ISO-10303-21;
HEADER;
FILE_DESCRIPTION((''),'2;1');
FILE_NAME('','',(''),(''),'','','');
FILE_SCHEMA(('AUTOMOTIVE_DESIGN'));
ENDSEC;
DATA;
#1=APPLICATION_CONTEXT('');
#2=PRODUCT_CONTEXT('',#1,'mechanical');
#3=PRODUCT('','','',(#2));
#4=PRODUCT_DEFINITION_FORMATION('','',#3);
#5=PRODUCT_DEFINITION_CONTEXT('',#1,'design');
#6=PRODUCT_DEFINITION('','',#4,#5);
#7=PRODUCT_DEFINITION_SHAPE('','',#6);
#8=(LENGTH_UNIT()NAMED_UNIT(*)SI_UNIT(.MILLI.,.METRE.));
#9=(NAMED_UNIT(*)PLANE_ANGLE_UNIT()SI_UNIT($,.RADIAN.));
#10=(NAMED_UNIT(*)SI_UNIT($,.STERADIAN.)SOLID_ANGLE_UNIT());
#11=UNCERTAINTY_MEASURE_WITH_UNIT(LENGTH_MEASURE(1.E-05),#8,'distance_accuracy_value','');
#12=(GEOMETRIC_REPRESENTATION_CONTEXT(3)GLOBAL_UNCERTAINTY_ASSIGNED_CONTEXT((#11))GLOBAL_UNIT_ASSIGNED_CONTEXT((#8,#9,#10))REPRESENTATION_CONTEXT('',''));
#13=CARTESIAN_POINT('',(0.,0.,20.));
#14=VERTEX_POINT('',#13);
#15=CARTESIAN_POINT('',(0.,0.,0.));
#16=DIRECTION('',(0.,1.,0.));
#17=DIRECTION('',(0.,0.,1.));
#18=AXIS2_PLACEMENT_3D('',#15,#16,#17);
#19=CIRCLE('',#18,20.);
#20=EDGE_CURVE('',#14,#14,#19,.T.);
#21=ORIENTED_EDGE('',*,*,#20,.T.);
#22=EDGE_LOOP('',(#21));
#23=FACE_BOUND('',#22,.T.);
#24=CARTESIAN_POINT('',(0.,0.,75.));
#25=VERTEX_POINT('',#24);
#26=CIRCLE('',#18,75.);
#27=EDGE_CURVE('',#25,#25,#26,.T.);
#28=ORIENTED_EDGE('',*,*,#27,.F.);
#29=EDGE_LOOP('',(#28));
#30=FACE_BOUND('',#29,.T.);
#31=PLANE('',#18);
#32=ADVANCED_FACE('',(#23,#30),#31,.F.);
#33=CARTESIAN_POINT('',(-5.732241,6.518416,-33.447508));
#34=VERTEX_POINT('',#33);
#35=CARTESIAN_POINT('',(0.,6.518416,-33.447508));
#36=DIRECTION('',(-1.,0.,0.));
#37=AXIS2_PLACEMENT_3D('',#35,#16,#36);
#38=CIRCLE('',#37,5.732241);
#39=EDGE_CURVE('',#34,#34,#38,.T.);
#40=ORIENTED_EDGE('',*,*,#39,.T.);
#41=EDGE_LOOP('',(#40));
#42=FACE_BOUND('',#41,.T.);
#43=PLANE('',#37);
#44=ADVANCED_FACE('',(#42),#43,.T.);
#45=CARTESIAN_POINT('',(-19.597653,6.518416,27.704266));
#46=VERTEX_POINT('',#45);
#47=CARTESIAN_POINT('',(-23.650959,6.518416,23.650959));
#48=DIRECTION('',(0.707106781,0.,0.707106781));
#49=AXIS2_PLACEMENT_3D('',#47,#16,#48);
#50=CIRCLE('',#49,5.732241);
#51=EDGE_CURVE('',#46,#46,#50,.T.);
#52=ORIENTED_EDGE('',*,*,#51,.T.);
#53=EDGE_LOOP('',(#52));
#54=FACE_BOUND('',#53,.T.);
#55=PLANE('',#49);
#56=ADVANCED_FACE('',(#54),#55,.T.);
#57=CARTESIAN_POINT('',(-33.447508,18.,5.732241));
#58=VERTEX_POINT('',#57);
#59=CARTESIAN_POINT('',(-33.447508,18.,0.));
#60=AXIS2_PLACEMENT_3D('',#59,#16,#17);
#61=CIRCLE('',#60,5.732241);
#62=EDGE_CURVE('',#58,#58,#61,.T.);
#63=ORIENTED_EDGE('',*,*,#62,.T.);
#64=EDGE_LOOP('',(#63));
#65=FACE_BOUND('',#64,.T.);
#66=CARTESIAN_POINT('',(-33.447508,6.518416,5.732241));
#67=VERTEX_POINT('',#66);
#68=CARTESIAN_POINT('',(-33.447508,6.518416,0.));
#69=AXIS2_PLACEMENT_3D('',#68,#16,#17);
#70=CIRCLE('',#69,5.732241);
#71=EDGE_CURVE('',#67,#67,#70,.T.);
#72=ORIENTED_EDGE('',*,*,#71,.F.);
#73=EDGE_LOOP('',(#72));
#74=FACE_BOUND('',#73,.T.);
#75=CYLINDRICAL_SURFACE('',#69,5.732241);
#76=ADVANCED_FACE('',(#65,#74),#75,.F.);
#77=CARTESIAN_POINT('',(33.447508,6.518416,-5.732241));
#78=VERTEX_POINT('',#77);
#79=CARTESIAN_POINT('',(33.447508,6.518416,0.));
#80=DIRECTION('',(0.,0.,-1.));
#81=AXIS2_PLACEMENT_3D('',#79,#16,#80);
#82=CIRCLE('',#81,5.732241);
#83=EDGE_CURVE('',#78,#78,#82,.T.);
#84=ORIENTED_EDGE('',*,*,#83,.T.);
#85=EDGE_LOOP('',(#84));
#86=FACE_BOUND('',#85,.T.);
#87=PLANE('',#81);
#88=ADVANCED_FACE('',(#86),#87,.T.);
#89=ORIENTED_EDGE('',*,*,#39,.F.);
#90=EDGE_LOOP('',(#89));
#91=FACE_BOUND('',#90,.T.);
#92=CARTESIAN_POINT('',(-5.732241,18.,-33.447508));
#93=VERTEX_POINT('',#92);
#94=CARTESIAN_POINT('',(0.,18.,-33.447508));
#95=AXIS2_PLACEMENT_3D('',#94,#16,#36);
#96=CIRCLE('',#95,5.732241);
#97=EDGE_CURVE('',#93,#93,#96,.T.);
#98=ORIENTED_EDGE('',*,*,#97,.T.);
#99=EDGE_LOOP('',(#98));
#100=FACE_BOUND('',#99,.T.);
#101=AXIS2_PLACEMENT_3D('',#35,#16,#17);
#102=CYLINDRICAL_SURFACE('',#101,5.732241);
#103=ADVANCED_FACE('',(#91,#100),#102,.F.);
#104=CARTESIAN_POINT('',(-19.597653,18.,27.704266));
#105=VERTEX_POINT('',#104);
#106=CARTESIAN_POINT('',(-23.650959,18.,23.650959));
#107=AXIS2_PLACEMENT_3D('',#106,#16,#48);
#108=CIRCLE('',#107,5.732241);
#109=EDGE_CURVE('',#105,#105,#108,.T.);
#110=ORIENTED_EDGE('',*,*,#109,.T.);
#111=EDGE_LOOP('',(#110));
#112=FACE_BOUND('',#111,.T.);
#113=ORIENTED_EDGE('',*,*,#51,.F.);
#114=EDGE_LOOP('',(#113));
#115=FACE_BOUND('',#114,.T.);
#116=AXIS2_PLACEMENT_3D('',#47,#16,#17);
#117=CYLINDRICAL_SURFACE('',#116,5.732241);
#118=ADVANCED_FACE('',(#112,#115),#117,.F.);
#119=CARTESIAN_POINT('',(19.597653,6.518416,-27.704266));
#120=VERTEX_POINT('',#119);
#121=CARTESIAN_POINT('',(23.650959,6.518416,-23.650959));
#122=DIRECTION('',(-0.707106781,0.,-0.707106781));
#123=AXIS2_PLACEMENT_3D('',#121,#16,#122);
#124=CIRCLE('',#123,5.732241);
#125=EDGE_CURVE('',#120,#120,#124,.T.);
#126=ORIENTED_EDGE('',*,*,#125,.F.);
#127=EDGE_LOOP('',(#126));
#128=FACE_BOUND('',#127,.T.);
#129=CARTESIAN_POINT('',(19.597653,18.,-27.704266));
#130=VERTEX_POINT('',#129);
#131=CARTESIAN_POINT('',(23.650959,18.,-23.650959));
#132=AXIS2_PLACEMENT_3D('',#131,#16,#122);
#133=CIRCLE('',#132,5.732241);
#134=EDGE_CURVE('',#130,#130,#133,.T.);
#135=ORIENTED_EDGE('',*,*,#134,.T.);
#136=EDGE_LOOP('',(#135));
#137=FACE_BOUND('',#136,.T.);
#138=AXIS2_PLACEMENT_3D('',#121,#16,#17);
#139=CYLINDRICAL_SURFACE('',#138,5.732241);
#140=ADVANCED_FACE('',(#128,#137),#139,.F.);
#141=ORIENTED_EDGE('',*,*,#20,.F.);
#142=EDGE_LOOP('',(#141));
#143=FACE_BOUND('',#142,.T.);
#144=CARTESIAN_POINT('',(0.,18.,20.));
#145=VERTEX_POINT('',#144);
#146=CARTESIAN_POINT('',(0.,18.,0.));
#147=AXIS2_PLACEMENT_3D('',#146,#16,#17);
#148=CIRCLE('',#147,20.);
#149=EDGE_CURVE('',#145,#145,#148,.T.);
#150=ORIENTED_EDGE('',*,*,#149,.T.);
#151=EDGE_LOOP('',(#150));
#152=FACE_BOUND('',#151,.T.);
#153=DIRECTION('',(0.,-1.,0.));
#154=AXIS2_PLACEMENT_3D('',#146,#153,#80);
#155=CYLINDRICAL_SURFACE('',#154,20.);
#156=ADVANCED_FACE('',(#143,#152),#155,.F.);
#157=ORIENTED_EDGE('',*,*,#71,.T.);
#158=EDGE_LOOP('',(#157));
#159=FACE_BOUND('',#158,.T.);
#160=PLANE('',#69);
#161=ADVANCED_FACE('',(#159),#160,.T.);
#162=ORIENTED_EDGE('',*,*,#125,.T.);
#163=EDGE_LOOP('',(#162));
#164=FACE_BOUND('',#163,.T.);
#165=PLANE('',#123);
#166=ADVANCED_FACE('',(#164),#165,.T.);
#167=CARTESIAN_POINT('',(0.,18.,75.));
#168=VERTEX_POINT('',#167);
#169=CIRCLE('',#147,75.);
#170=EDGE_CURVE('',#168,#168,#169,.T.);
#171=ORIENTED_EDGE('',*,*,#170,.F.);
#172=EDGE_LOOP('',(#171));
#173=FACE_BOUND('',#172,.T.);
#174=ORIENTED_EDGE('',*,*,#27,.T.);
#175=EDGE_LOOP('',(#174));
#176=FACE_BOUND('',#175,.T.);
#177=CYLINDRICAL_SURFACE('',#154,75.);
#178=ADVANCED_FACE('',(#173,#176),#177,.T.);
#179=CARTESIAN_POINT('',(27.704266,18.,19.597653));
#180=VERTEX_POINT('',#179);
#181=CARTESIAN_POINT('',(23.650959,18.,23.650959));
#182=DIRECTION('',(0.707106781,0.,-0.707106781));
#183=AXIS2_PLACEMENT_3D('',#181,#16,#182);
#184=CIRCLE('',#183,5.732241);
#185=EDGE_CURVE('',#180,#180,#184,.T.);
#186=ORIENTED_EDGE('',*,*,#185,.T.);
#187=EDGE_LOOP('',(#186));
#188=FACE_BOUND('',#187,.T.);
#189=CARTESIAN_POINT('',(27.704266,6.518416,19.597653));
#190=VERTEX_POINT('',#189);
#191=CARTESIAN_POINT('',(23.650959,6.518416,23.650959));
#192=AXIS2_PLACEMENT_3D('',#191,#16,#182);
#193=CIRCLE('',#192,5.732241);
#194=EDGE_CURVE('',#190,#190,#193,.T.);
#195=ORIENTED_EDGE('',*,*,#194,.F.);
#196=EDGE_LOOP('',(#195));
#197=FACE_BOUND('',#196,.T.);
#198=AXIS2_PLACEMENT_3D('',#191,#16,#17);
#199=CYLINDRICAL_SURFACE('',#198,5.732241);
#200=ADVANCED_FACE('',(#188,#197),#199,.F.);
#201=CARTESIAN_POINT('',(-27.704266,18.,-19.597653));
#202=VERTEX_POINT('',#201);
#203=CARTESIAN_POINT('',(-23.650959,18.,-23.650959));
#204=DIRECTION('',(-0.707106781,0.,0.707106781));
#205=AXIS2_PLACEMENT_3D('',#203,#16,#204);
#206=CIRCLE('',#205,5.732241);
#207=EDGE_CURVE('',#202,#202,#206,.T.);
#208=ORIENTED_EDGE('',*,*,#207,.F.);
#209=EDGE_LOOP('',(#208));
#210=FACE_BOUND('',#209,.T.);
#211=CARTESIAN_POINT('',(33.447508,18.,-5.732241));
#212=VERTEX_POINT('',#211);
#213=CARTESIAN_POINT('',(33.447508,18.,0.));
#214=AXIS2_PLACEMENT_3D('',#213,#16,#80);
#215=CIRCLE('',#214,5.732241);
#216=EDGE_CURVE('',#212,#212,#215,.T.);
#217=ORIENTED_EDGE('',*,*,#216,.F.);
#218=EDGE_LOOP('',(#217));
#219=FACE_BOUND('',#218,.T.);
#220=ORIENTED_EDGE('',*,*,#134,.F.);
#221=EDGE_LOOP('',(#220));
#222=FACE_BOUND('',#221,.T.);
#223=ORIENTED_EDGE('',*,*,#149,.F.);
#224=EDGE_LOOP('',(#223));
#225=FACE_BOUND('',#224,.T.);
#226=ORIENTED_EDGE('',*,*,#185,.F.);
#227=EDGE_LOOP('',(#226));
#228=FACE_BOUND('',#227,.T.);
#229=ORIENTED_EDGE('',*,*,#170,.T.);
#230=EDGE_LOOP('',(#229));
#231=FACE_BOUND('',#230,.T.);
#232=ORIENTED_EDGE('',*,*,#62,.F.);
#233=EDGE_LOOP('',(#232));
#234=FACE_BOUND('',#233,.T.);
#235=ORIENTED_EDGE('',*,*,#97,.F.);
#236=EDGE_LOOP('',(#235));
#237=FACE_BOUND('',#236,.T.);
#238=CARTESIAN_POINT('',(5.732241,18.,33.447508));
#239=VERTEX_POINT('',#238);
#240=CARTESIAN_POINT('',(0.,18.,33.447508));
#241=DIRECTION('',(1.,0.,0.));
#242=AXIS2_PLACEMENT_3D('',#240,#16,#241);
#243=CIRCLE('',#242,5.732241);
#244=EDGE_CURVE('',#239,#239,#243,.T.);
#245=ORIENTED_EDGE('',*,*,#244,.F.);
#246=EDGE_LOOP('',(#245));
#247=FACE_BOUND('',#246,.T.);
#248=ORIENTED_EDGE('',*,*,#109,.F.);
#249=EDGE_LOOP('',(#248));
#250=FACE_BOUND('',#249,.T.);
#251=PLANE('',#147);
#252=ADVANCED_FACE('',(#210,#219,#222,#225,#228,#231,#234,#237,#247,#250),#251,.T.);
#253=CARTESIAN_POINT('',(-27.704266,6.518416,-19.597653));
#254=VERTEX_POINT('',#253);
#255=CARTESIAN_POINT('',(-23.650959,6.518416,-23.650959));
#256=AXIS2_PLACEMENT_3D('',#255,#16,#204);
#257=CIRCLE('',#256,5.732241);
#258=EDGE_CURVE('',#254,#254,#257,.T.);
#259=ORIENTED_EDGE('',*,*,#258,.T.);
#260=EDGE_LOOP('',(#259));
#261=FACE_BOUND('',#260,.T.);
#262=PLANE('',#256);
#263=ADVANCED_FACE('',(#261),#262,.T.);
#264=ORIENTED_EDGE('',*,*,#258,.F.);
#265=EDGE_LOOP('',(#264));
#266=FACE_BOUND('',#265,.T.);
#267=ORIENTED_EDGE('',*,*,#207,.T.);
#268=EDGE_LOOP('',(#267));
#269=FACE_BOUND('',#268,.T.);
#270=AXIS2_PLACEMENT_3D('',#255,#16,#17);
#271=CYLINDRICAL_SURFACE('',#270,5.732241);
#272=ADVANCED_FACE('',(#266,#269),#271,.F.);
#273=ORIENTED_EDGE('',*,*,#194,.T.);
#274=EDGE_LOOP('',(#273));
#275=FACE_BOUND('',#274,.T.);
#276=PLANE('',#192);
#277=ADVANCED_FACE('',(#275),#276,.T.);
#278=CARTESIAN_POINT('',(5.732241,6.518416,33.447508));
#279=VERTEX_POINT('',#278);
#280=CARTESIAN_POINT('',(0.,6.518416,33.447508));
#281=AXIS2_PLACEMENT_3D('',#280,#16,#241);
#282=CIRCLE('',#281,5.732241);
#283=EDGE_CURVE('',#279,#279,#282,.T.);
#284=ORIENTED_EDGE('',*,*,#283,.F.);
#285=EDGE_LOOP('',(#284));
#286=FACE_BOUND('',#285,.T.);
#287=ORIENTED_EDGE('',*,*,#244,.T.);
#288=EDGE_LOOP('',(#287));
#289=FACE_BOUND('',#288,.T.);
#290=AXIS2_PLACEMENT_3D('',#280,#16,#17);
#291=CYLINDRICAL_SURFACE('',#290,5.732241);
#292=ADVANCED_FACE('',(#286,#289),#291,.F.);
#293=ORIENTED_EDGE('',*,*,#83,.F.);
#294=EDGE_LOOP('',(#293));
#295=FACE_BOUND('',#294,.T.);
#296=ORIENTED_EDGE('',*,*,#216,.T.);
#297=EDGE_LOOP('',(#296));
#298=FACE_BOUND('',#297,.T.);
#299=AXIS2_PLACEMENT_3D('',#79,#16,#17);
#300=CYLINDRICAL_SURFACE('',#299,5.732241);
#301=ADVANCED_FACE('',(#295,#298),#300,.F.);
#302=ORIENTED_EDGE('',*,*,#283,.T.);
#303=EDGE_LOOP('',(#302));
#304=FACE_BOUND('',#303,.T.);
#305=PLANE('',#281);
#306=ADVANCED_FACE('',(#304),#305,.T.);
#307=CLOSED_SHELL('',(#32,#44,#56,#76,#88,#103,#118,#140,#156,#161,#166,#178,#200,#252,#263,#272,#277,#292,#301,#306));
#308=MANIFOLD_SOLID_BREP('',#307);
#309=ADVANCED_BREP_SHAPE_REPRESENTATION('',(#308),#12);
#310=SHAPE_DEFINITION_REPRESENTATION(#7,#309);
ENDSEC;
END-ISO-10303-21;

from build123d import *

# Parameters (mm, degrees)
SKETCH1_R           = 75
BOSS_EXTRUDE1_DEPTH = 18
SKETCH2_R           = 20
CUT_EXTRUDE1_DEPTH  = 108.582526462
SKETCH3_R           = 5.73224068
CUT_EXTRUDE2_DEPTH  = 11.481584317
CIRPATTERN1_COUNT   = 8


with BuildPart() as part:
    # Sketch1 → Boss-Extrude1 (new body)
    with BuildSketch(Plane(origin=(0, 0, 0), x_dir=(1, 0, 0), z_dir=(0, 1, 0))):
        Circle(SKETCH1_R)
    extrude(amount=BOSS_EXTRUDE1_DEPTH)

    # Sketch2 → Cut-Extrude1 (cut, through all)
    with BuildSketch(Plane(origin=(0, 0, 0), x_dir=(1, 0, 0), z_dir=(0, 1, 0))):
        Circle(SKETCH2_R)
    extrude(amount=CUT_EXTRUDE1_DEPTH, mode=Mode.SUBTRACT)

    # Sketch3 → Cut-Extrude2 (cut)
    with BuildSketch(Plane(origin=(0, 18, 0), x_dir=(1, 0, 0), z_dir=(0, 1, 0))):
        with Locations((-33.447507615, 0)):
            Circle(SKETCH3_R)
    cut_extrude2 = extrude(amount=-CUT_EXTRUDE2_DEPTH, mode=Mode.SUBTRACT)

    # CirPattern1: Cut-Extrude2 ×8 about axis
    cirpattern1_axis = Axis((0, 0, 0), (0, 1, 0))
    for i in range(1, CIRPATTERN1_COUNT):
        add(cut_extrude2.rotate(cirpattern1_axis, i * 360 / CIRPATTERN1_COUNT), mode=Mode.SUBTRACT)


solid = part.part
